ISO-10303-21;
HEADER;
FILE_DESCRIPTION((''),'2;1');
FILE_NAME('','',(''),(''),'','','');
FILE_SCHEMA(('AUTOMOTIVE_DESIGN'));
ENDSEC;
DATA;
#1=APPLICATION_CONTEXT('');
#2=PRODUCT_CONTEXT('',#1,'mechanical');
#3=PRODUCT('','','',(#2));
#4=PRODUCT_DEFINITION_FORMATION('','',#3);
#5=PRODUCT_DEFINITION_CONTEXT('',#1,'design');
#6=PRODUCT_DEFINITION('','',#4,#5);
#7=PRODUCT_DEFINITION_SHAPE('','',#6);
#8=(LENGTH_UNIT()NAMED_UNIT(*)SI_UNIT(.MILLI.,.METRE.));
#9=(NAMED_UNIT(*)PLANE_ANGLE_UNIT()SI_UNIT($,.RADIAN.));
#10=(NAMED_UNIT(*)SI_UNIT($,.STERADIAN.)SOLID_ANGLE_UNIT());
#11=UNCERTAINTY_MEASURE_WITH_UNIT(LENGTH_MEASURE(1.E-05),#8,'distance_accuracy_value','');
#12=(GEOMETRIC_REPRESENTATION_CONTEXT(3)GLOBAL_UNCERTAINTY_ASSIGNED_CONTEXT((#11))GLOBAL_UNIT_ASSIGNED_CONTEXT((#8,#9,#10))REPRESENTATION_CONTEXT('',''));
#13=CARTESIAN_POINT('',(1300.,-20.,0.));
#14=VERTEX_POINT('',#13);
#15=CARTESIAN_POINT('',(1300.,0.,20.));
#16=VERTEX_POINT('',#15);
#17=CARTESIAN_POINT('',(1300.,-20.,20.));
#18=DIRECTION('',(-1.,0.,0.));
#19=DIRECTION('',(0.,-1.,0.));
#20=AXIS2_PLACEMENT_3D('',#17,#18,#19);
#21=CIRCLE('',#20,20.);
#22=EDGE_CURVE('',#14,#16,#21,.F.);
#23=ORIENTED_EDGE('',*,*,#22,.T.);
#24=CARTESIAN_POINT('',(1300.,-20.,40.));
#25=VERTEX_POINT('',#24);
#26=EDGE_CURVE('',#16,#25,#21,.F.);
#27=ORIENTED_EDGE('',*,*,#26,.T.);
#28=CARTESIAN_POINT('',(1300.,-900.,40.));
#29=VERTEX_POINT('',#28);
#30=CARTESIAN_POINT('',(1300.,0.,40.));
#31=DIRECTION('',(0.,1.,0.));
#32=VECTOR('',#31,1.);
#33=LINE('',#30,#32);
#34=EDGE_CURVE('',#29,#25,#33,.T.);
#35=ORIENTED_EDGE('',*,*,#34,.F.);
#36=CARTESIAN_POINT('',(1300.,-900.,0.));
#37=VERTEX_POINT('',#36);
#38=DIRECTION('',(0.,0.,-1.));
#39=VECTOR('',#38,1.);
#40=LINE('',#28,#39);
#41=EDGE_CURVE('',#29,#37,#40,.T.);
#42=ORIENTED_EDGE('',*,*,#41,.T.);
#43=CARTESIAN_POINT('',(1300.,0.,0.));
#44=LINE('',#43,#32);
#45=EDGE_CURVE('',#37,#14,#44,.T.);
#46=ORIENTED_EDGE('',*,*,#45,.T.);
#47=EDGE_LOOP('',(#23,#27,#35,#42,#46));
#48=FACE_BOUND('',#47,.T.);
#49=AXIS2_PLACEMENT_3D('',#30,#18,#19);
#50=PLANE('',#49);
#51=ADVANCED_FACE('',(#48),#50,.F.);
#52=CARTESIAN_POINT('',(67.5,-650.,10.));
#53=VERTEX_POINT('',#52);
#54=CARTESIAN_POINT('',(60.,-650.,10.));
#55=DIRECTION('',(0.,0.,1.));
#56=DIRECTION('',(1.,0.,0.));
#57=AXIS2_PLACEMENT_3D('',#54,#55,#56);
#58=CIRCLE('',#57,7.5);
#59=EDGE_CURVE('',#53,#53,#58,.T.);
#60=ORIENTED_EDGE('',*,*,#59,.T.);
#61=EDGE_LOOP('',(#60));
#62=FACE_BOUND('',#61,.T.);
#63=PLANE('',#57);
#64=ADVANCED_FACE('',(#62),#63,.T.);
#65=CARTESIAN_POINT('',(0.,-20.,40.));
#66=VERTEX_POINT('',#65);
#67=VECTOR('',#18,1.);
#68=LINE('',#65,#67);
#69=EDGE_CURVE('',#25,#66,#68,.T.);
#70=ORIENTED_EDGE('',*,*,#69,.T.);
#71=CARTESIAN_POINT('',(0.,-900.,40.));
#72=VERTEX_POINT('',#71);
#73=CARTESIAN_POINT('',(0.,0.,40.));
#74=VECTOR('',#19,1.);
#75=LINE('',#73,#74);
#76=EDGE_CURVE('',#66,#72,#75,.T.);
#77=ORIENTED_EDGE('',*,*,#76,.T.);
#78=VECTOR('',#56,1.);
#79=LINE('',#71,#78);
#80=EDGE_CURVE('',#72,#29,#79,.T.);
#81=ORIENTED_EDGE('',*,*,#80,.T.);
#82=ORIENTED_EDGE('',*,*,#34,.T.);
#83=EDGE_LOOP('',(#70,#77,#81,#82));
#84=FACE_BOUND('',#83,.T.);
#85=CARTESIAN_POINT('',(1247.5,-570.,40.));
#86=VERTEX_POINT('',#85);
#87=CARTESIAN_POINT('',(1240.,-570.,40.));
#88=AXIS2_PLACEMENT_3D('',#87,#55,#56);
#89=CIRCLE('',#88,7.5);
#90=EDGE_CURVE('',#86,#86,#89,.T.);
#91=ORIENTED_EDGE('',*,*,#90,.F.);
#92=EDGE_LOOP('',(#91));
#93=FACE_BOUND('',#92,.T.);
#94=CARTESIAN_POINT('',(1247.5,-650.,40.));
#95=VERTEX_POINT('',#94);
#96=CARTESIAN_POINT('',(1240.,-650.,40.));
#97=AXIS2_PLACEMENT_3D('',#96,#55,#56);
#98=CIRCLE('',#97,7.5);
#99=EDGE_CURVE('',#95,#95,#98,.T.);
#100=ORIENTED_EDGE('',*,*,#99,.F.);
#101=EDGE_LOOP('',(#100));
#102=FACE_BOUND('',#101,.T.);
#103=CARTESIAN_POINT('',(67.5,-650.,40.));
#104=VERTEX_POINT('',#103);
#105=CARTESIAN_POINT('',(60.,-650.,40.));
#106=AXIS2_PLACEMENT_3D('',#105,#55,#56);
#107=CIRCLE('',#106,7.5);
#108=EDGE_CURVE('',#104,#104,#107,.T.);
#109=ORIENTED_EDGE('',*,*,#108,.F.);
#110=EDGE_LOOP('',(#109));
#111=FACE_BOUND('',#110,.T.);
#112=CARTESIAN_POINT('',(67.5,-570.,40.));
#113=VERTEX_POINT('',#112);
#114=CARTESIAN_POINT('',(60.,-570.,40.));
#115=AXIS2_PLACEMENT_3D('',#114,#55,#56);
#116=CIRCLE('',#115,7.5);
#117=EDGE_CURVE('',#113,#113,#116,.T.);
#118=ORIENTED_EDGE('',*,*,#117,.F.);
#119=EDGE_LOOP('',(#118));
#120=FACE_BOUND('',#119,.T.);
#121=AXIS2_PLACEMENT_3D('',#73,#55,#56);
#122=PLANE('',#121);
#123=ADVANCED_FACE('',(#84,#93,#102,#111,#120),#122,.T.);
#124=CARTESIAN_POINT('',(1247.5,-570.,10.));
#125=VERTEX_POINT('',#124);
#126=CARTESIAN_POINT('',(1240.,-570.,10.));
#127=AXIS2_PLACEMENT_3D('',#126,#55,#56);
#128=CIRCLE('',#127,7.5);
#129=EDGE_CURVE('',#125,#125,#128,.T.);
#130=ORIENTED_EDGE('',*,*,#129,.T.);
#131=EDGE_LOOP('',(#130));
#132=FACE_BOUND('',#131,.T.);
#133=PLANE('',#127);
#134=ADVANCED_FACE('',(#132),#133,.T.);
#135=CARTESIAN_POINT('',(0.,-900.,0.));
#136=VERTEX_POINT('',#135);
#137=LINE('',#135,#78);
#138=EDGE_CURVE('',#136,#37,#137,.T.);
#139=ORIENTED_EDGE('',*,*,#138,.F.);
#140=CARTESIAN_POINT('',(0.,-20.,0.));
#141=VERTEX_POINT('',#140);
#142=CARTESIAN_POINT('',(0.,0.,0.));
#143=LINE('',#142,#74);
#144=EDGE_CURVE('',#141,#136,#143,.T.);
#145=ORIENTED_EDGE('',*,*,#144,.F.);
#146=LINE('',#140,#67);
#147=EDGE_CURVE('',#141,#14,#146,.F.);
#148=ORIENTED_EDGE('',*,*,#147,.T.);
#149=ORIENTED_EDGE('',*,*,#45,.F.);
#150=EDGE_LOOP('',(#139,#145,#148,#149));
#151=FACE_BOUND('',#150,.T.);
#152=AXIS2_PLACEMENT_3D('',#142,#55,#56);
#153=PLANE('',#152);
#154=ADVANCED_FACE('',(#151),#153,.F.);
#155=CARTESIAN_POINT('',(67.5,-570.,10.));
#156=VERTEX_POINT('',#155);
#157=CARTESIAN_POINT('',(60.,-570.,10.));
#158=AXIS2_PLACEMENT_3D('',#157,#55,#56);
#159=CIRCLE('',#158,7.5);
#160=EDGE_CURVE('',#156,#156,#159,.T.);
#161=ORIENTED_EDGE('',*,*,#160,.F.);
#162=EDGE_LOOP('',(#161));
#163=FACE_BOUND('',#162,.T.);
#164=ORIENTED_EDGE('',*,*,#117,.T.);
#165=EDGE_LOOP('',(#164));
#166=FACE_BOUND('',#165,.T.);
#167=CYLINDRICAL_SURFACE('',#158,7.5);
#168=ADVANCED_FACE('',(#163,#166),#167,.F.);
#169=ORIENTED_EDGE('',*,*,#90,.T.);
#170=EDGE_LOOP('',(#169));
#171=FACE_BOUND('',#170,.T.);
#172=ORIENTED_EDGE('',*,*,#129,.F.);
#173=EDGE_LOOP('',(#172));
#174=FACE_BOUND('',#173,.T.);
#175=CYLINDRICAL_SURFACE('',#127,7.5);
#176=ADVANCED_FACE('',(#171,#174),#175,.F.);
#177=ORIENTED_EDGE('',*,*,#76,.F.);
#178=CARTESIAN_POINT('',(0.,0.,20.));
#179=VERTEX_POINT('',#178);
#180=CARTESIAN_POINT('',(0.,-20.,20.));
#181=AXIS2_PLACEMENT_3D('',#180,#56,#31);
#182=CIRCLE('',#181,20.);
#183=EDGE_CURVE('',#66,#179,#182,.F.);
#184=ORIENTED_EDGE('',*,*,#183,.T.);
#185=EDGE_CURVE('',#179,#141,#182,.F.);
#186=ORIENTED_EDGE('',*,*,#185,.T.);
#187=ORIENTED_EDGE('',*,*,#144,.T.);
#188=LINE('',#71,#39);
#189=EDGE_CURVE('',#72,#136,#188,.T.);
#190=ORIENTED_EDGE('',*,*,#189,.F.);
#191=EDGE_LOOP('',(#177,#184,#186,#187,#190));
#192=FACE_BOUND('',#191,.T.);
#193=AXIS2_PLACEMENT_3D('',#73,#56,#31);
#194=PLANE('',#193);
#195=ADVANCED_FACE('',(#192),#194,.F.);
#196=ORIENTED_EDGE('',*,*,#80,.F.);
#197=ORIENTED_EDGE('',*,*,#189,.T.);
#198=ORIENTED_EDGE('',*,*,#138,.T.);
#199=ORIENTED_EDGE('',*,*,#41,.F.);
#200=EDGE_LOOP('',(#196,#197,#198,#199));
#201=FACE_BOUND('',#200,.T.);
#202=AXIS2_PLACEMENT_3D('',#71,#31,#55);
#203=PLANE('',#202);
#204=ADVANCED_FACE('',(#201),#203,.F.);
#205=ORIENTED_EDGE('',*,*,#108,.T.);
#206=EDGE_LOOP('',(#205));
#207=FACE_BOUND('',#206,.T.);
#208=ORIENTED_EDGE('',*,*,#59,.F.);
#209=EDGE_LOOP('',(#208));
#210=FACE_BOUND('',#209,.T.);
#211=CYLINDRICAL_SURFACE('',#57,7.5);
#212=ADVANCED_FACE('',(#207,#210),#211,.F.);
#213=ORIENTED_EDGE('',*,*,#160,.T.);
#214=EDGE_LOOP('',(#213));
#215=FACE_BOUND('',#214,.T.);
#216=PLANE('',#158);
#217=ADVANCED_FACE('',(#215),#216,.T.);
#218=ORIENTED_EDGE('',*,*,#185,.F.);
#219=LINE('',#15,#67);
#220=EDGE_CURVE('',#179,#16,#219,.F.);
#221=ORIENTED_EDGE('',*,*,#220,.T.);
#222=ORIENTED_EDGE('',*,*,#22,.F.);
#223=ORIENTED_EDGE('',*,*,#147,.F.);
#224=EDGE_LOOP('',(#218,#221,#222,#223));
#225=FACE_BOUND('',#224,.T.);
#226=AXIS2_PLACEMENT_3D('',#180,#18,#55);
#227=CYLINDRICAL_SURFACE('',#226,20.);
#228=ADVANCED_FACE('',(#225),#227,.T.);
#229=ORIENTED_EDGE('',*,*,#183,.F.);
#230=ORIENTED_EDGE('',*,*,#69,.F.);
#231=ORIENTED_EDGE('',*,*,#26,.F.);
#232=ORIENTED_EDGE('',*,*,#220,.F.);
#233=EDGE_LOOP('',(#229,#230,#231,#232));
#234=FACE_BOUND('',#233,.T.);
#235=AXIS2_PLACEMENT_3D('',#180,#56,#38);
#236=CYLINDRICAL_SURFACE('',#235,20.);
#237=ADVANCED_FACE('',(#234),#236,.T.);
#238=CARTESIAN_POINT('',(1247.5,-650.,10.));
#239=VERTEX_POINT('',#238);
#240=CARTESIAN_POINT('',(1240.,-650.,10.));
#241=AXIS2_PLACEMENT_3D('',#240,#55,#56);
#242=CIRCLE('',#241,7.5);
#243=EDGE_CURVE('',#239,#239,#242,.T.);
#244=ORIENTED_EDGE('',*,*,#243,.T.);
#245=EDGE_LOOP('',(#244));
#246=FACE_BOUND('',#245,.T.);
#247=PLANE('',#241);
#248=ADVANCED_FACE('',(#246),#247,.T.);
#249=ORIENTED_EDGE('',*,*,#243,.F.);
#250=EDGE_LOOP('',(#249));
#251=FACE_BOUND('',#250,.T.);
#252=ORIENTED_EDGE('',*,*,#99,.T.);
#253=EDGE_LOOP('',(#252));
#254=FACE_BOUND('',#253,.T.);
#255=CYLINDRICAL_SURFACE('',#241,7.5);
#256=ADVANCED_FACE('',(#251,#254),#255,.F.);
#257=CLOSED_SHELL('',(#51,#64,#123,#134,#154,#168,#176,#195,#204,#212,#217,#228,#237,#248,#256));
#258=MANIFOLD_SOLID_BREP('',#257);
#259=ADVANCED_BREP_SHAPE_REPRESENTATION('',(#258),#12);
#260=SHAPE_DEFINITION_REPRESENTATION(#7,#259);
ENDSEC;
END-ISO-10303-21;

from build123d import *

# Parameters (mm, degrees)
SCHIZZO1_W                   = 1300
SCHIZZO1_H                   = 900
ESTRUSIONE_ESTRUSIONE1_DEPTH = 40
RACCORDO1_R                  = 20
SCHIZZO2_R                   = 7.5
TAGLIO_ESTRUSIONE1_DEPTH     = 30


with BuildPart() as part:
    # Schizzo1 → Estrusione-Estrusione1 (new body)
    with BuildSketch(Plane.XY):
        with Locations((650, -450)):
            Rectangle(SCHIZZO1_W, SCHIZZO1_H)
    extrude(amount=ESTRUSIONE_ESTRUSIONE1_DEPTH)

    # Raccordo1
    raccordo1_edges = [part.edges().sort_by_distance(p)[0] for p in [
        (650, 0, 0),
        (650, 0, 40),
    ]]
    fillet(raccordo1_edges, radius=RACCORDO1_R - 0.0001)  # a hair under: the kernel refuses the full size

    # Schizzo2 → Taglio-Estrusione1 (cut)
    with BuildSketch(Plane.XY.offset(40)):
        with Locations((60, -650)):
            Circle(SCHIZZO2_R)
        with Locations((60, -570)):
            Circle(SCHIZZO2_R)
        with Locations((1240, -650)):
            Circle(SCHIZZO2_R)
        with Locations((1240, -570)):
            Circle(SCHIZZO2_R)
    extrude(amount=-TAGLIO_ESTRUSIONE1_DEPTH, mode=Mode.SUBTRACT)


solid = part.part
